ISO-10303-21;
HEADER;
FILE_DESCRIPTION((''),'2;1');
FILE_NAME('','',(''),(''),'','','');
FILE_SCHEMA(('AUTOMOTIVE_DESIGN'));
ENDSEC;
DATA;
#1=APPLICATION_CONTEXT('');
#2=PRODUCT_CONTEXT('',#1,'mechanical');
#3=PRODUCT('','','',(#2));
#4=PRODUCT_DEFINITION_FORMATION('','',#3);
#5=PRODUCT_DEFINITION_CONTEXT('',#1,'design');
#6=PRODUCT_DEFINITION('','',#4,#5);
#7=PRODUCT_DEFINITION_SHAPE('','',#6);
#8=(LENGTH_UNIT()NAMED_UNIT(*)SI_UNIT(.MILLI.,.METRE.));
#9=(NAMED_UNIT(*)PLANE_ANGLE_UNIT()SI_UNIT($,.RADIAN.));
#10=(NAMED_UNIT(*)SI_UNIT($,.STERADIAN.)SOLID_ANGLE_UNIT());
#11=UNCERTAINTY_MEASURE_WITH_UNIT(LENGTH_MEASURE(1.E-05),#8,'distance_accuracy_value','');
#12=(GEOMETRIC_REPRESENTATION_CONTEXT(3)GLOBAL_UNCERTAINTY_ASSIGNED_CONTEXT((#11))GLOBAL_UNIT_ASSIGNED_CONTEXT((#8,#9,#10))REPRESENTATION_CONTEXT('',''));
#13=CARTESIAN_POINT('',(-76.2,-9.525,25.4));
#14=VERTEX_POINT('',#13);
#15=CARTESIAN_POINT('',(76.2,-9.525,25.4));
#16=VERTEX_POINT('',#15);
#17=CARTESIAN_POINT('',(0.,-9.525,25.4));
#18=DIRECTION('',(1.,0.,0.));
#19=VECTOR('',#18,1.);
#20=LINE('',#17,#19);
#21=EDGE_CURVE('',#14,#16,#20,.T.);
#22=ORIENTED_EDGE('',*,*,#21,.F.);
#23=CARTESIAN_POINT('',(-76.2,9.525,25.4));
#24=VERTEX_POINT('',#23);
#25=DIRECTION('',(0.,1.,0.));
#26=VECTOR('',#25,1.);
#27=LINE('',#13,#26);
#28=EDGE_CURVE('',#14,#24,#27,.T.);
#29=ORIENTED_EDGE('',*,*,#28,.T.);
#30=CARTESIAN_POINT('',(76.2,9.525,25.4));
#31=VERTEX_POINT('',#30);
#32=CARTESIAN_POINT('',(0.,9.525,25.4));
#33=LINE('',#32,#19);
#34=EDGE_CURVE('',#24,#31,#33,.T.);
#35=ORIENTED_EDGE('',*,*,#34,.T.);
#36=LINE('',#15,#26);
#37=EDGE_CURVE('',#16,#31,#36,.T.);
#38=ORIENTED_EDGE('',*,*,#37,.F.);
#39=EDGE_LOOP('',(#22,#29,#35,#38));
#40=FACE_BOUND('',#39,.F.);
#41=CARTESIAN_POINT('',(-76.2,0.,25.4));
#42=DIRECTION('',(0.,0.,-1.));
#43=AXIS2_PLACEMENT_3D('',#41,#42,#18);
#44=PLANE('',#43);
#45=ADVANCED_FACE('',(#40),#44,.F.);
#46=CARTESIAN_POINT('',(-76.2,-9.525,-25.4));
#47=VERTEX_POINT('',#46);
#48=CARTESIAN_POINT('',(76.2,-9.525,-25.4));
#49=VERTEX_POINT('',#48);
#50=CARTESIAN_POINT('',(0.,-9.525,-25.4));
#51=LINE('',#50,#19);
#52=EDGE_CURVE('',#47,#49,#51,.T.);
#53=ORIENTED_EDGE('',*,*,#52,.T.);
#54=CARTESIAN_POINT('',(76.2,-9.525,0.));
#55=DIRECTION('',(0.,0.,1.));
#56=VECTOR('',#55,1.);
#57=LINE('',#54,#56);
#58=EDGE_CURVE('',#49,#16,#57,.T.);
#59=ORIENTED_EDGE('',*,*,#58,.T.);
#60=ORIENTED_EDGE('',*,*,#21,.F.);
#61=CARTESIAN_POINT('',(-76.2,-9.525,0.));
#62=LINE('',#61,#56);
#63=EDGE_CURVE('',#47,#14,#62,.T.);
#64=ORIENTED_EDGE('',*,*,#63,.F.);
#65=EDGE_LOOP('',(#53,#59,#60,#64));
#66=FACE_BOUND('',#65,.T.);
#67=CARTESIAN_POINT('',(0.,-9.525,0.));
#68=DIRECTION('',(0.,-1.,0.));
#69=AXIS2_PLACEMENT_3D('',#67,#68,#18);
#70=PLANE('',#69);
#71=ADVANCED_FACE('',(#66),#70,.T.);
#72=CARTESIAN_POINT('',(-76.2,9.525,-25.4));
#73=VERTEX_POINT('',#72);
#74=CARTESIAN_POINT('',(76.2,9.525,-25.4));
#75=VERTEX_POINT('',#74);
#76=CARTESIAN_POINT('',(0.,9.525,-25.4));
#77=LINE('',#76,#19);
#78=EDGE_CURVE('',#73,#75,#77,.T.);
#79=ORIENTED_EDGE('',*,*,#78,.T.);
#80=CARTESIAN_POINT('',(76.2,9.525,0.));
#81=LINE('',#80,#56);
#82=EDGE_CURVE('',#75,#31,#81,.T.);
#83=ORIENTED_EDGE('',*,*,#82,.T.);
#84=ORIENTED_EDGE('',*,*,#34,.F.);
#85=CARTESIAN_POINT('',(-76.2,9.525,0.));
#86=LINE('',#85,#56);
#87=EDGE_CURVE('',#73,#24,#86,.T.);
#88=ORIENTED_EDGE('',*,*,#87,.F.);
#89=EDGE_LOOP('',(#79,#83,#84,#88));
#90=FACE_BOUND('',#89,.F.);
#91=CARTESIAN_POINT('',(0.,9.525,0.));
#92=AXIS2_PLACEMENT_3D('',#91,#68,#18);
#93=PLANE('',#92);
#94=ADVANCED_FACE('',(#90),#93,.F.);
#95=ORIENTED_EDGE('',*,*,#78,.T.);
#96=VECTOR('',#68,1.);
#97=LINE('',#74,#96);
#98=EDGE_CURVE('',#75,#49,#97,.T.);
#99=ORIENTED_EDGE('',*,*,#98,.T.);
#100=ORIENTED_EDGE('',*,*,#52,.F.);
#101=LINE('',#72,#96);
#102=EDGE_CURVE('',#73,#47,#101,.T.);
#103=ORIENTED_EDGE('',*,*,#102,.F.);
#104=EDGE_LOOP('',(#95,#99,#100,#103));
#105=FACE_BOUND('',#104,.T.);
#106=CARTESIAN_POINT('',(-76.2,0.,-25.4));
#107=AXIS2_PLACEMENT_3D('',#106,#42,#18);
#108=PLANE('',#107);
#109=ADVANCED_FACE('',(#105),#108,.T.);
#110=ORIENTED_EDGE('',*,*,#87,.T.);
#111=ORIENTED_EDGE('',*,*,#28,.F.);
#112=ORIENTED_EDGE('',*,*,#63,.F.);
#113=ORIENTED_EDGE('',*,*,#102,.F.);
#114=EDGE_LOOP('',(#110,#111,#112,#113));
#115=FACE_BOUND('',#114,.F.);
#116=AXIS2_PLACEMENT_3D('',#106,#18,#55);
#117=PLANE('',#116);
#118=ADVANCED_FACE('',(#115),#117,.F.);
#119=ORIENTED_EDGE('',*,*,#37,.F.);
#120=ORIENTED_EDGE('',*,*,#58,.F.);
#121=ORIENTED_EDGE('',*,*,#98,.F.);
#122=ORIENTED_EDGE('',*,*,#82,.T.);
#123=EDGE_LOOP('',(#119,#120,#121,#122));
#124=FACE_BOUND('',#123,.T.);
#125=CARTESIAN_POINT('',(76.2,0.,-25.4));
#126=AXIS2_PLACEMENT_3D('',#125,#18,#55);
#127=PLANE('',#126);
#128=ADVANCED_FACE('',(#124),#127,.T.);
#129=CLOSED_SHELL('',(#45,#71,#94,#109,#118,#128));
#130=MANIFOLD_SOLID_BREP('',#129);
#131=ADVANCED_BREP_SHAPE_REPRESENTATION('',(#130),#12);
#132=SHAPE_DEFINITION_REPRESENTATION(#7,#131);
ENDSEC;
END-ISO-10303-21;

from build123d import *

# Parameters (mm, degrees)
F1_W     = 152.4
F1_H     = 50.8
F2_DEPTH = 9.525


# Not quite as in the source:
# - a variable given as a bare number and used for a length is read in inches; the dataset says mm whatever the document's units were


with BuildPart() as f2:
    # F1 (on Front) → F2 (new body, symmetric)
    with BuildSketch(Plane.XZ):
        Rectangle(F1_W, F1_H)
    extrude(amount=F2_DEPTH, both=True)


solid = f2.part
